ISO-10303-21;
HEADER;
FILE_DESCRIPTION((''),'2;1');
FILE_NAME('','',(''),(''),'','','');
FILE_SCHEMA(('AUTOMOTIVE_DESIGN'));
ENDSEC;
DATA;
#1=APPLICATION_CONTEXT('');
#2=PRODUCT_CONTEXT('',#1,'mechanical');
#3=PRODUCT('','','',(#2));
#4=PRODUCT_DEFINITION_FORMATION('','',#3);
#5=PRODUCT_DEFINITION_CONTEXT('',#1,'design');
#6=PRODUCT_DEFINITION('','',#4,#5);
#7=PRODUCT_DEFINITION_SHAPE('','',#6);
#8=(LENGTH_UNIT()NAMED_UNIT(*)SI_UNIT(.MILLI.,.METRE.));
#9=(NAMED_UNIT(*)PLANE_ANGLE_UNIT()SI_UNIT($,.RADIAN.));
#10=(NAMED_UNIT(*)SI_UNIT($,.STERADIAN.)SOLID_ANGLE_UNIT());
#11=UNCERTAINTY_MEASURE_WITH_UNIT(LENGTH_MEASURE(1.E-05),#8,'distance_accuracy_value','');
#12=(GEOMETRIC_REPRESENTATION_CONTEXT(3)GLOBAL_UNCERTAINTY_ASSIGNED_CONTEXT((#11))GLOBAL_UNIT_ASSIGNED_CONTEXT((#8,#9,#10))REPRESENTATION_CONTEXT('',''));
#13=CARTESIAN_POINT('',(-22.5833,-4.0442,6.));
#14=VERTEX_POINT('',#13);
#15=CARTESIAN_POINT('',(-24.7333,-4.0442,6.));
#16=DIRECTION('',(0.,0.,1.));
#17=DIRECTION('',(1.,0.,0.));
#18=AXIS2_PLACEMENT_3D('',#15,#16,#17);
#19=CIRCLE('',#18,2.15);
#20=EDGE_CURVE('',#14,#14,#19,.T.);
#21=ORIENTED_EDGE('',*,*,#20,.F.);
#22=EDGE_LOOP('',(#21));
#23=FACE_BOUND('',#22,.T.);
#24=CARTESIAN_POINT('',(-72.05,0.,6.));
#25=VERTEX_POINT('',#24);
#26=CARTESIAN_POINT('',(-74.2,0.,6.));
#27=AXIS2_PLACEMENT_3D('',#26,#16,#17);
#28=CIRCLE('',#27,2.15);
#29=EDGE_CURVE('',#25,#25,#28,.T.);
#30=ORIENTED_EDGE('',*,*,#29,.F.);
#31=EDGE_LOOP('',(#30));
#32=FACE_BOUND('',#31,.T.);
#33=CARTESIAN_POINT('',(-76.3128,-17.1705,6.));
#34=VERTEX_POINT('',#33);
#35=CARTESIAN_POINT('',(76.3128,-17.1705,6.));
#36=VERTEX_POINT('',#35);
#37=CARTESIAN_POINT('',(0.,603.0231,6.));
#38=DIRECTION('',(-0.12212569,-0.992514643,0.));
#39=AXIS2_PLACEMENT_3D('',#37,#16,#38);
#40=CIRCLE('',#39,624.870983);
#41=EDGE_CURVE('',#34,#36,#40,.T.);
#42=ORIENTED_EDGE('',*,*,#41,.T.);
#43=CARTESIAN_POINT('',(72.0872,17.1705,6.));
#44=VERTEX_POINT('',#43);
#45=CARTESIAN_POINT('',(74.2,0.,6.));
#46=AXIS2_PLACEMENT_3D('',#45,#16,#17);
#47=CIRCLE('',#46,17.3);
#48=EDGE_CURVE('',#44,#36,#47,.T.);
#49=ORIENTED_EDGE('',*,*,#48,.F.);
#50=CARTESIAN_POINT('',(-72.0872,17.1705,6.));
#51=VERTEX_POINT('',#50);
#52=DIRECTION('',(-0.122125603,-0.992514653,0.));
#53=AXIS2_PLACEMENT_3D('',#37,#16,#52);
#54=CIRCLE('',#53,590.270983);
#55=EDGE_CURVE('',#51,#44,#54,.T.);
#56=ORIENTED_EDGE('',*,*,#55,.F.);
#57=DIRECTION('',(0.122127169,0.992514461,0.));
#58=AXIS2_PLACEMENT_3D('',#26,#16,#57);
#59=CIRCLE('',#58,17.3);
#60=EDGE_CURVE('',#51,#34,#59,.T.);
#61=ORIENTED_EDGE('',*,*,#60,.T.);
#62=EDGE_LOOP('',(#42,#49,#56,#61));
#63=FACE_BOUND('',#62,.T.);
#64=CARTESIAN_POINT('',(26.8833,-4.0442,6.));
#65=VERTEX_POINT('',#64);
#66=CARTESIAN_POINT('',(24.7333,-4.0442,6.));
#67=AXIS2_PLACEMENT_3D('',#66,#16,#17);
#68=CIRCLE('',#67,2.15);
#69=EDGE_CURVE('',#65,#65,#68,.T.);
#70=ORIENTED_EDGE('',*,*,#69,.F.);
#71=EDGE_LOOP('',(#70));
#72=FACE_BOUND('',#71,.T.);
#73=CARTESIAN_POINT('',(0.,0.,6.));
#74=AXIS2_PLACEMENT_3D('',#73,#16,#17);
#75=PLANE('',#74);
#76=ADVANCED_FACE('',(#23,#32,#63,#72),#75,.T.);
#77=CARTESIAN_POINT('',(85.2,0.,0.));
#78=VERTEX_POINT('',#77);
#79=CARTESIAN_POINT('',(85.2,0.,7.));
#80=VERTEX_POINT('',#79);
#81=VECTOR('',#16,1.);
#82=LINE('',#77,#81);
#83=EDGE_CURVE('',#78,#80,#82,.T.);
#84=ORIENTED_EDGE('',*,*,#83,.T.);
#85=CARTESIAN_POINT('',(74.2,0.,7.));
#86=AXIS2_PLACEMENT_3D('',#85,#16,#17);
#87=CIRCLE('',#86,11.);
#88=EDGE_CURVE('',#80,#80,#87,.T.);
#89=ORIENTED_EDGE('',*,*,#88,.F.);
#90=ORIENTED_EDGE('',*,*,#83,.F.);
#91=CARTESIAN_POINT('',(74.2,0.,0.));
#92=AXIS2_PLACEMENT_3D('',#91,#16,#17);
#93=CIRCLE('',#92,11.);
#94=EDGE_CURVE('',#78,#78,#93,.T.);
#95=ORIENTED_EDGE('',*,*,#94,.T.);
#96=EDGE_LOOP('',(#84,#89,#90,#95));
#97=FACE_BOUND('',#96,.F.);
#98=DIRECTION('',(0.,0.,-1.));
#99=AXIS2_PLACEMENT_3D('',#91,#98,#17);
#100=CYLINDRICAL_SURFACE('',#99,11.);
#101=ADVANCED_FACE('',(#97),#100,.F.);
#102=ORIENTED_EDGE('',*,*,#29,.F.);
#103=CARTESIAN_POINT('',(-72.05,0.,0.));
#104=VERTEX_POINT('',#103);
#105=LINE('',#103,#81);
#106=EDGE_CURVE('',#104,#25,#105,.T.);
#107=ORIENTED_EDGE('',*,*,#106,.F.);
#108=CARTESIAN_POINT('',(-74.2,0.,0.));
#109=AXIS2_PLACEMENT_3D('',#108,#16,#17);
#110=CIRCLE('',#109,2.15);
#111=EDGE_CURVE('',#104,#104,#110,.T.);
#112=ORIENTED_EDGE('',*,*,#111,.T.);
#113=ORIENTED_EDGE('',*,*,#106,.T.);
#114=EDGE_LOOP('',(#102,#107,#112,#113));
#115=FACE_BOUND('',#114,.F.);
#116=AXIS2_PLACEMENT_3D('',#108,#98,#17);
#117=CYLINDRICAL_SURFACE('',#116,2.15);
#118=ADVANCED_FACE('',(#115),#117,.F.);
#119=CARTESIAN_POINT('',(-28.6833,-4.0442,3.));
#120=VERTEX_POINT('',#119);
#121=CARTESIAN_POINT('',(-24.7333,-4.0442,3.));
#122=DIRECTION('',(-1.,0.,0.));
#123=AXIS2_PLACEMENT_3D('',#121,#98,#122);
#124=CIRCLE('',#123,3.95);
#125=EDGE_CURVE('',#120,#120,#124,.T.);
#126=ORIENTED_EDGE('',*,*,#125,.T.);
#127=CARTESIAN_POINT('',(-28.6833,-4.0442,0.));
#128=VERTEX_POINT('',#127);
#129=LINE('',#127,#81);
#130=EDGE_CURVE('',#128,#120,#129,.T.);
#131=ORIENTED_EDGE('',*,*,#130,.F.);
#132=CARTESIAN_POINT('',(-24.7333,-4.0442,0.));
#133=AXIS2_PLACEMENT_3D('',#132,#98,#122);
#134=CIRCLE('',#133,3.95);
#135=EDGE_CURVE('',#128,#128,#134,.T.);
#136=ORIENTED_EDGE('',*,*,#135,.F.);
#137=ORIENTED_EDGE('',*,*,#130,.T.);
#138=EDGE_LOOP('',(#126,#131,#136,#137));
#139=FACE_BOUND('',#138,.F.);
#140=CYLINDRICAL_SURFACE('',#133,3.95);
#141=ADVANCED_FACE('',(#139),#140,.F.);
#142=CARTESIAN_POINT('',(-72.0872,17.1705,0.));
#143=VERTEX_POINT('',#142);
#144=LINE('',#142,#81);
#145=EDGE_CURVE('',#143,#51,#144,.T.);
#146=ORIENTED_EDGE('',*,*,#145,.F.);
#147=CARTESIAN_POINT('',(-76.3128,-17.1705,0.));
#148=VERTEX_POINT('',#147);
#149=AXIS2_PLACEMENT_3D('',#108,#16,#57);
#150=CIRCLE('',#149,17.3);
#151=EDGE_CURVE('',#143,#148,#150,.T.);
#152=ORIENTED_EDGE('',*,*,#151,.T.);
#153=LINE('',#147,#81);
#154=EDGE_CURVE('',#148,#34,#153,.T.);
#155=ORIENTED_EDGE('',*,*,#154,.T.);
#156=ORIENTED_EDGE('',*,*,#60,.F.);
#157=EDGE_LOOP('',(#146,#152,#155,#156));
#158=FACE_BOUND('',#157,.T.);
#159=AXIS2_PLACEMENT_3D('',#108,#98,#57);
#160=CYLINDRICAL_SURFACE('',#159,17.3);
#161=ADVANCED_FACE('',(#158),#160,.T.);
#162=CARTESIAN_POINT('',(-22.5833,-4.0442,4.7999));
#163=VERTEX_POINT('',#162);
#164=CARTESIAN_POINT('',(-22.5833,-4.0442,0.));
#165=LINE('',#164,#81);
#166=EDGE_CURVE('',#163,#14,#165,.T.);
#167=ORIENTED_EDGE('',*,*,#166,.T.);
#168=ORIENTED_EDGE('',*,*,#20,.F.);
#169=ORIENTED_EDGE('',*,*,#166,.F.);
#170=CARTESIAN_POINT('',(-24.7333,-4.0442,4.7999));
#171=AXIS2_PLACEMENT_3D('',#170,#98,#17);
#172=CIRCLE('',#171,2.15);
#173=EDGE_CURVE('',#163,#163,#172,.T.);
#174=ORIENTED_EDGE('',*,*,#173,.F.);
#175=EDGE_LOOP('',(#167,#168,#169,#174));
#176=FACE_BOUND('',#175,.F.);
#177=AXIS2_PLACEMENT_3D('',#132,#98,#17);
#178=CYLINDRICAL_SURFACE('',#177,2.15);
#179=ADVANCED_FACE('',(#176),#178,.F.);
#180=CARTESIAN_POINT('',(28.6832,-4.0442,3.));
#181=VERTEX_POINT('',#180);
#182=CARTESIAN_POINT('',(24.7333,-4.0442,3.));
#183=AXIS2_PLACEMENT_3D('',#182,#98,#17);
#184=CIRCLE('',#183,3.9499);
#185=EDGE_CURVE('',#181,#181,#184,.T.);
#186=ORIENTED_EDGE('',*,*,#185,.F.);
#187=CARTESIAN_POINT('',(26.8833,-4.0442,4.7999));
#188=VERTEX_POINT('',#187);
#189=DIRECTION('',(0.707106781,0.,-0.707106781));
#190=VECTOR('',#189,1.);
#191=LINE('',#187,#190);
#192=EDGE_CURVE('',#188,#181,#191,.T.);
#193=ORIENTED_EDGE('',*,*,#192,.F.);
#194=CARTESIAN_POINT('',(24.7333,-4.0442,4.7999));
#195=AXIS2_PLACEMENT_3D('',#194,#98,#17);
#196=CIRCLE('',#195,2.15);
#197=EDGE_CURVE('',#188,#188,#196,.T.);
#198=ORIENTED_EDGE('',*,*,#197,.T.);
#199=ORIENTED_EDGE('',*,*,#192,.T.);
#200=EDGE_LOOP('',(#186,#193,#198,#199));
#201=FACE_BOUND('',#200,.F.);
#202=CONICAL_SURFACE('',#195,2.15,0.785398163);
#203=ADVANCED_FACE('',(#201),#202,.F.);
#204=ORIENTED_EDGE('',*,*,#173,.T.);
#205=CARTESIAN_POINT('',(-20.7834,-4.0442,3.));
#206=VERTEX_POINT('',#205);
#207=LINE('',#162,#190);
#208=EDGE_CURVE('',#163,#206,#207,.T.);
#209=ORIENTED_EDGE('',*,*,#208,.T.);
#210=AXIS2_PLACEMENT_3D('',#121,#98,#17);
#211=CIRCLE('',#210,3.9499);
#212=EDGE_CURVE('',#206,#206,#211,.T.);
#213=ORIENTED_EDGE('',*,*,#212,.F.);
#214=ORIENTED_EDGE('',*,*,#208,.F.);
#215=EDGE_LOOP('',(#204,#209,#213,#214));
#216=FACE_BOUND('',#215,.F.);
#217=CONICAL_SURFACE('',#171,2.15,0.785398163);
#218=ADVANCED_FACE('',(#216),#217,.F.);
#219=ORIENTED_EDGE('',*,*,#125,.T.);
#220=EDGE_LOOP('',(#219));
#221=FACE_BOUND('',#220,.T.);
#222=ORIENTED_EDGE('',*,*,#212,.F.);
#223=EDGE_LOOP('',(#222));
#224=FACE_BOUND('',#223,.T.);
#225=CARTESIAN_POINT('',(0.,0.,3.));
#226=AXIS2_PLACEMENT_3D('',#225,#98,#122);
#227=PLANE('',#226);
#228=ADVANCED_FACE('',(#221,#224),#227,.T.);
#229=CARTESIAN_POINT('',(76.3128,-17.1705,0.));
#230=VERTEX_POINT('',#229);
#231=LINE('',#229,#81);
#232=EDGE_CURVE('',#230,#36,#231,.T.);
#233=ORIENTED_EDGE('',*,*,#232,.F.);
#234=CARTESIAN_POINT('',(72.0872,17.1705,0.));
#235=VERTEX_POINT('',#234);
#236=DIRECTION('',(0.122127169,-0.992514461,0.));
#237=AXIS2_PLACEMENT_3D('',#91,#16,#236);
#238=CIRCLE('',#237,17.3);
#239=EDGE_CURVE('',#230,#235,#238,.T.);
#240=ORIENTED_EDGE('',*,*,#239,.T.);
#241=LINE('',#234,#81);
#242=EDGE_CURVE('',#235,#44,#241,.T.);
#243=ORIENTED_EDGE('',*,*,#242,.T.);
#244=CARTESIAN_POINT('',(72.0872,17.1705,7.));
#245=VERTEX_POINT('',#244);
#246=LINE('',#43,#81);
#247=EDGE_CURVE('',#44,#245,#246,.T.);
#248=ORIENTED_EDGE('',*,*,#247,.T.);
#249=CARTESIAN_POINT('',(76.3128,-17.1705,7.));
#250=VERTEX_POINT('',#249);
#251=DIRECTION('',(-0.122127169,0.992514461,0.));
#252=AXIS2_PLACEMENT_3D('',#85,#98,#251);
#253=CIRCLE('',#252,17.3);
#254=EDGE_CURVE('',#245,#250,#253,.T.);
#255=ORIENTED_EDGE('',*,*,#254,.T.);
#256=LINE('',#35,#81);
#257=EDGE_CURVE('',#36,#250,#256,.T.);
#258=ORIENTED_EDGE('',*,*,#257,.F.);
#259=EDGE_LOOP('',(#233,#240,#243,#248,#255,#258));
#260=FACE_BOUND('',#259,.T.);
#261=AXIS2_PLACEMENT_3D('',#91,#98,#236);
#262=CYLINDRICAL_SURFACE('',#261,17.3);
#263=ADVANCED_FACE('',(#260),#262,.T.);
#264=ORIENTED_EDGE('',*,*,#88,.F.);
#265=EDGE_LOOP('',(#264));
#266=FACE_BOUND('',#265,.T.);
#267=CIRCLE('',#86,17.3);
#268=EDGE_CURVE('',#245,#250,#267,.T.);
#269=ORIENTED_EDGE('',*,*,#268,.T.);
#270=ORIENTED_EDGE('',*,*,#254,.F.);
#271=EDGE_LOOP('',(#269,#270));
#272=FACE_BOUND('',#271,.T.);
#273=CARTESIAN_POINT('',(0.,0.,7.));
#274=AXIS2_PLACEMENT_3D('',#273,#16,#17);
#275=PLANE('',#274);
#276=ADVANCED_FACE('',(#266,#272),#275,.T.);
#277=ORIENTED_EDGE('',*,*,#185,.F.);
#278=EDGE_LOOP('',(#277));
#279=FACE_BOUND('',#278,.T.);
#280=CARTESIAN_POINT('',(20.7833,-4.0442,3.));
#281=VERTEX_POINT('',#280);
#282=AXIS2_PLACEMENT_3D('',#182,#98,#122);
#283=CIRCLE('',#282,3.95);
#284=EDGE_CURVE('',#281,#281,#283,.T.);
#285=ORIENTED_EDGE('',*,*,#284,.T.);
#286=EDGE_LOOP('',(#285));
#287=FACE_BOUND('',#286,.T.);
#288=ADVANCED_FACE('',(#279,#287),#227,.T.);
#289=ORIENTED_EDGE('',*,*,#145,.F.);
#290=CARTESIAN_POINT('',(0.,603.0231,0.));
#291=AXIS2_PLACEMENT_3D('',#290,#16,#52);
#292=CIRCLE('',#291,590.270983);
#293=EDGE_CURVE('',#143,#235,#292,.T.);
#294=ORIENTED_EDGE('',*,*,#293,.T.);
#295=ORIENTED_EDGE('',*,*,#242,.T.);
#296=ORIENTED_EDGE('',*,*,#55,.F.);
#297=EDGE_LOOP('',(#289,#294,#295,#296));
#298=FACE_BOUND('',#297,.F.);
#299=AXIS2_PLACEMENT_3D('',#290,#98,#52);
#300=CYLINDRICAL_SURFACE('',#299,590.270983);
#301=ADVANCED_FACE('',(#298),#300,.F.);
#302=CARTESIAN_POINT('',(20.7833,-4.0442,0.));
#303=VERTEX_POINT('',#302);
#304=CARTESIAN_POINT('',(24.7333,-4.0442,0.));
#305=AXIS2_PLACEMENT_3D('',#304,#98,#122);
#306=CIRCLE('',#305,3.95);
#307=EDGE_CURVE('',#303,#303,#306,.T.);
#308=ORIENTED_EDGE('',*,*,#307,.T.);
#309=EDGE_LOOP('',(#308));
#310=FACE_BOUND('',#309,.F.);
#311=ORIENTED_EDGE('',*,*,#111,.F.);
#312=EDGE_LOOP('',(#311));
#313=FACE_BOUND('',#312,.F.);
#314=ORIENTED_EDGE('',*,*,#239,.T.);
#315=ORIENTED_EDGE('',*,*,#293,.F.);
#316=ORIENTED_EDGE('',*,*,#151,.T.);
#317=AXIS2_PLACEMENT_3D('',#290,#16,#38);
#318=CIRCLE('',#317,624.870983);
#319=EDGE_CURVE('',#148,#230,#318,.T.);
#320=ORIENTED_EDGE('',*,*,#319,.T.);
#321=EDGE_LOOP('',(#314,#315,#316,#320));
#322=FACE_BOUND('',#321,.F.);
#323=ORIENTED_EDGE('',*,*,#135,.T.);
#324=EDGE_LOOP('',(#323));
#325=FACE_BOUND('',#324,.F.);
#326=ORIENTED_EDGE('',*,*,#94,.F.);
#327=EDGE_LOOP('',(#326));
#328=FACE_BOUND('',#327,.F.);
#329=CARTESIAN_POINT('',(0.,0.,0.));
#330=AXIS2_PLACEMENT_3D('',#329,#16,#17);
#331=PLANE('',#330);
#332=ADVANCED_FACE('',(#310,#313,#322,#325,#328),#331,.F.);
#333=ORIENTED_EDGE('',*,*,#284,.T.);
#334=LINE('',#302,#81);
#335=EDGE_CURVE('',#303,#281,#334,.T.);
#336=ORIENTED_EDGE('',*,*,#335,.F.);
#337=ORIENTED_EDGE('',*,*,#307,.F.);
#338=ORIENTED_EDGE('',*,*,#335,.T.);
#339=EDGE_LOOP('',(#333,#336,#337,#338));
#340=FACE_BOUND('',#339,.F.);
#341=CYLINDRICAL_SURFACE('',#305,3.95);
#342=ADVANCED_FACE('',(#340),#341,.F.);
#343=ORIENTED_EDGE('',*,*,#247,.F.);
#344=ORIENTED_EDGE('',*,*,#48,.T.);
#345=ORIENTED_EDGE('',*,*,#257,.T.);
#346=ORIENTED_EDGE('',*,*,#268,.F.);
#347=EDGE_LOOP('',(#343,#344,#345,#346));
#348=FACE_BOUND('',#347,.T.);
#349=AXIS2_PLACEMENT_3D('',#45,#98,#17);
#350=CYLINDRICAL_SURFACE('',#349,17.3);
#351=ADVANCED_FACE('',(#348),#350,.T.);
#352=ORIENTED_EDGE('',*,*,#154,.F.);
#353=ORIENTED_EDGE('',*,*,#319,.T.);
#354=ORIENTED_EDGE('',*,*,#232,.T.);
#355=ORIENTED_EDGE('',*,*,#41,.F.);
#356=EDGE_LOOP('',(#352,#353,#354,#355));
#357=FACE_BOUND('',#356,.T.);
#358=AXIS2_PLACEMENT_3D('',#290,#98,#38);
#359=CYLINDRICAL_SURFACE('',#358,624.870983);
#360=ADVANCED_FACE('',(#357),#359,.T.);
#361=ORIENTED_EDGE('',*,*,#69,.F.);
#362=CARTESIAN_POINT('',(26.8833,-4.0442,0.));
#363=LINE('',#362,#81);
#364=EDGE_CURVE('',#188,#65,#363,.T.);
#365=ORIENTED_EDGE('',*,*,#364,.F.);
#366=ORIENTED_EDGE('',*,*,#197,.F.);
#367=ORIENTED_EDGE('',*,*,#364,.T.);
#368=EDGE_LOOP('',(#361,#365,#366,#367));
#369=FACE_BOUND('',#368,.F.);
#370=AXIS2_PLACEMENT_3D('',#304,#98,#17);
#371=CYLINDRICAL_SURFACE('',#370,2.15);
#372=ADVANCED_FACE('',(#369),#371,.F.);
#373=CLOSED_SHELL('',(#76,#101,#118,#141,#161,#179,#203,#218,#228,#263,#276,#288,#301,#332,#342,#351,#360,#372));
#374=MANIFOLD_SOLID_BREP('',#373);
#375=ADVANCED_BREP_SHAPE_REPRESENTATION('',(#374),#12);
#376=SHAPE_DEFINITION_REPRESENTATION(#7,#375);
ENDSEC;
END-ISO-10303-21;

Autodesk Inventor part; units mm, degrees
ref_plane "YZ Plane" through (0, 0, 0) normal (1, 0, 0) x (0, 1, 0)
ref_plane "XZ Plane" through (0, 0, 0) normal (0, 1, 0) x (-1, 0, 0)
ref_plane "XY Plane" through (0, 0, 0) normal (0, 0, 1) x (1, 0, 0)
sketch "Sketch1" plane through (0, 0, 0) normal (0, 0, 1) x (1, 0, 0)
  arc A0 (-74.2, 0) -> (74.2, 0) centre (0, 603.0231) ccw construction
  arc A1 (-76.3128, -17.1705) -> (76.3128, -17.1705) centre (0, 603.0231) ccw
  arc A2 (-72.0872, 17.1705) -> (72.0872, 17.1705) centre (0, 603.0231) ccw
  arc A3 (-72.0872, 17.1705) -> (-76.3128, -17.1705) centre (-74.2, 0) ccw
  arc A4 (76.3128, -17.1705) -> (72.0872, 17.1705) centre (74.2, 0) ccw
  line L0 (-159.9202, 0) -> (186.0645, 0) construction
  line L1 (0, 827.4607) -> (0, -503.7998) construction
  line L2 (74.2, 0) -> (74.2, 0) construction
  line L3 (74.2, 0) -> (91.3705, 2.1128) construction
  line L4 (74.2, 0) -> (72.0872, 17.1705) construction
  circle A5 centre (-74.2, 0) radius 2.15
  circle A6 centre (-24.7333, -4.0442) radius 2.15
  circle A7 centre (24.7333, -4.0442) radius 2.15
  circle A8 centre (74.2, 0) radius 11
  point P0 (0, 0)
  dimension "d0" = 148.4
  dimension "d1" = 34.6
  dimension "d2" = 603.0231
  dimension "d6" = 49.4667
  dimension "d7" = 24.7333
  dimension "d8" = 4.3
  dimension "d9" = 4.3
  dimension "d10" = 4.3
  dimension "d12" = 22
extrude "Extrusion1" add sketch "Sketch1" along normal blind 6
sketch "Sketch2" plane through (0, 0, 6) normal (0, 0, 1) x (1, 0, 0)
  circle A0 centre (74.2, 0) radius 11 projected
  arc A1 (76.3128, -17.1705) -> (72.0872, 17.1705) centre (74.2, 0) ccw projected
  arc A2 (-76.3128, -17.1705) -> (76.3128, -17.1705) centre (0, 603.0231) ccw projected
  circle A3 centre (74.2, 0) radius 17.3
  point P0 (0, 0)
extrude "Extrusion2" add sketch "Sketch2" along normal blind 1
sketch "Sketch3" plane through (0, 0, 0) normal (0, 0, -1) x (-1, 0, 0)
  circle A0 centre (-24.7333, -4.0442) radius 2.15 projected
  circle A1 centre (-24.7333, -4.0442) radius 3.95
  circle A2 centre (24.7333, -4.0442) radius 2.15 projected
  circle A3 centre (24.7333, -4.0442) radius 3.95
  point P0 (0, 0)
  dimension "d19" = 7.9
  dimension "d20" = 7.9
extrude "Extrusion3" cut sketch "Sketch3" against normal blind 3
chamfer "Chamfer1" distance 1.8 angle 45 2 edges at (22.5833, -4.0442, 3) (-26.8833, -4.0442, 3)
equation "\"d6\" = 0.333333 * d0"
equation "\"d7\" = 0.5 * d6"
equation "\"d20\" = d19"
properties part number "Arm 16X"
